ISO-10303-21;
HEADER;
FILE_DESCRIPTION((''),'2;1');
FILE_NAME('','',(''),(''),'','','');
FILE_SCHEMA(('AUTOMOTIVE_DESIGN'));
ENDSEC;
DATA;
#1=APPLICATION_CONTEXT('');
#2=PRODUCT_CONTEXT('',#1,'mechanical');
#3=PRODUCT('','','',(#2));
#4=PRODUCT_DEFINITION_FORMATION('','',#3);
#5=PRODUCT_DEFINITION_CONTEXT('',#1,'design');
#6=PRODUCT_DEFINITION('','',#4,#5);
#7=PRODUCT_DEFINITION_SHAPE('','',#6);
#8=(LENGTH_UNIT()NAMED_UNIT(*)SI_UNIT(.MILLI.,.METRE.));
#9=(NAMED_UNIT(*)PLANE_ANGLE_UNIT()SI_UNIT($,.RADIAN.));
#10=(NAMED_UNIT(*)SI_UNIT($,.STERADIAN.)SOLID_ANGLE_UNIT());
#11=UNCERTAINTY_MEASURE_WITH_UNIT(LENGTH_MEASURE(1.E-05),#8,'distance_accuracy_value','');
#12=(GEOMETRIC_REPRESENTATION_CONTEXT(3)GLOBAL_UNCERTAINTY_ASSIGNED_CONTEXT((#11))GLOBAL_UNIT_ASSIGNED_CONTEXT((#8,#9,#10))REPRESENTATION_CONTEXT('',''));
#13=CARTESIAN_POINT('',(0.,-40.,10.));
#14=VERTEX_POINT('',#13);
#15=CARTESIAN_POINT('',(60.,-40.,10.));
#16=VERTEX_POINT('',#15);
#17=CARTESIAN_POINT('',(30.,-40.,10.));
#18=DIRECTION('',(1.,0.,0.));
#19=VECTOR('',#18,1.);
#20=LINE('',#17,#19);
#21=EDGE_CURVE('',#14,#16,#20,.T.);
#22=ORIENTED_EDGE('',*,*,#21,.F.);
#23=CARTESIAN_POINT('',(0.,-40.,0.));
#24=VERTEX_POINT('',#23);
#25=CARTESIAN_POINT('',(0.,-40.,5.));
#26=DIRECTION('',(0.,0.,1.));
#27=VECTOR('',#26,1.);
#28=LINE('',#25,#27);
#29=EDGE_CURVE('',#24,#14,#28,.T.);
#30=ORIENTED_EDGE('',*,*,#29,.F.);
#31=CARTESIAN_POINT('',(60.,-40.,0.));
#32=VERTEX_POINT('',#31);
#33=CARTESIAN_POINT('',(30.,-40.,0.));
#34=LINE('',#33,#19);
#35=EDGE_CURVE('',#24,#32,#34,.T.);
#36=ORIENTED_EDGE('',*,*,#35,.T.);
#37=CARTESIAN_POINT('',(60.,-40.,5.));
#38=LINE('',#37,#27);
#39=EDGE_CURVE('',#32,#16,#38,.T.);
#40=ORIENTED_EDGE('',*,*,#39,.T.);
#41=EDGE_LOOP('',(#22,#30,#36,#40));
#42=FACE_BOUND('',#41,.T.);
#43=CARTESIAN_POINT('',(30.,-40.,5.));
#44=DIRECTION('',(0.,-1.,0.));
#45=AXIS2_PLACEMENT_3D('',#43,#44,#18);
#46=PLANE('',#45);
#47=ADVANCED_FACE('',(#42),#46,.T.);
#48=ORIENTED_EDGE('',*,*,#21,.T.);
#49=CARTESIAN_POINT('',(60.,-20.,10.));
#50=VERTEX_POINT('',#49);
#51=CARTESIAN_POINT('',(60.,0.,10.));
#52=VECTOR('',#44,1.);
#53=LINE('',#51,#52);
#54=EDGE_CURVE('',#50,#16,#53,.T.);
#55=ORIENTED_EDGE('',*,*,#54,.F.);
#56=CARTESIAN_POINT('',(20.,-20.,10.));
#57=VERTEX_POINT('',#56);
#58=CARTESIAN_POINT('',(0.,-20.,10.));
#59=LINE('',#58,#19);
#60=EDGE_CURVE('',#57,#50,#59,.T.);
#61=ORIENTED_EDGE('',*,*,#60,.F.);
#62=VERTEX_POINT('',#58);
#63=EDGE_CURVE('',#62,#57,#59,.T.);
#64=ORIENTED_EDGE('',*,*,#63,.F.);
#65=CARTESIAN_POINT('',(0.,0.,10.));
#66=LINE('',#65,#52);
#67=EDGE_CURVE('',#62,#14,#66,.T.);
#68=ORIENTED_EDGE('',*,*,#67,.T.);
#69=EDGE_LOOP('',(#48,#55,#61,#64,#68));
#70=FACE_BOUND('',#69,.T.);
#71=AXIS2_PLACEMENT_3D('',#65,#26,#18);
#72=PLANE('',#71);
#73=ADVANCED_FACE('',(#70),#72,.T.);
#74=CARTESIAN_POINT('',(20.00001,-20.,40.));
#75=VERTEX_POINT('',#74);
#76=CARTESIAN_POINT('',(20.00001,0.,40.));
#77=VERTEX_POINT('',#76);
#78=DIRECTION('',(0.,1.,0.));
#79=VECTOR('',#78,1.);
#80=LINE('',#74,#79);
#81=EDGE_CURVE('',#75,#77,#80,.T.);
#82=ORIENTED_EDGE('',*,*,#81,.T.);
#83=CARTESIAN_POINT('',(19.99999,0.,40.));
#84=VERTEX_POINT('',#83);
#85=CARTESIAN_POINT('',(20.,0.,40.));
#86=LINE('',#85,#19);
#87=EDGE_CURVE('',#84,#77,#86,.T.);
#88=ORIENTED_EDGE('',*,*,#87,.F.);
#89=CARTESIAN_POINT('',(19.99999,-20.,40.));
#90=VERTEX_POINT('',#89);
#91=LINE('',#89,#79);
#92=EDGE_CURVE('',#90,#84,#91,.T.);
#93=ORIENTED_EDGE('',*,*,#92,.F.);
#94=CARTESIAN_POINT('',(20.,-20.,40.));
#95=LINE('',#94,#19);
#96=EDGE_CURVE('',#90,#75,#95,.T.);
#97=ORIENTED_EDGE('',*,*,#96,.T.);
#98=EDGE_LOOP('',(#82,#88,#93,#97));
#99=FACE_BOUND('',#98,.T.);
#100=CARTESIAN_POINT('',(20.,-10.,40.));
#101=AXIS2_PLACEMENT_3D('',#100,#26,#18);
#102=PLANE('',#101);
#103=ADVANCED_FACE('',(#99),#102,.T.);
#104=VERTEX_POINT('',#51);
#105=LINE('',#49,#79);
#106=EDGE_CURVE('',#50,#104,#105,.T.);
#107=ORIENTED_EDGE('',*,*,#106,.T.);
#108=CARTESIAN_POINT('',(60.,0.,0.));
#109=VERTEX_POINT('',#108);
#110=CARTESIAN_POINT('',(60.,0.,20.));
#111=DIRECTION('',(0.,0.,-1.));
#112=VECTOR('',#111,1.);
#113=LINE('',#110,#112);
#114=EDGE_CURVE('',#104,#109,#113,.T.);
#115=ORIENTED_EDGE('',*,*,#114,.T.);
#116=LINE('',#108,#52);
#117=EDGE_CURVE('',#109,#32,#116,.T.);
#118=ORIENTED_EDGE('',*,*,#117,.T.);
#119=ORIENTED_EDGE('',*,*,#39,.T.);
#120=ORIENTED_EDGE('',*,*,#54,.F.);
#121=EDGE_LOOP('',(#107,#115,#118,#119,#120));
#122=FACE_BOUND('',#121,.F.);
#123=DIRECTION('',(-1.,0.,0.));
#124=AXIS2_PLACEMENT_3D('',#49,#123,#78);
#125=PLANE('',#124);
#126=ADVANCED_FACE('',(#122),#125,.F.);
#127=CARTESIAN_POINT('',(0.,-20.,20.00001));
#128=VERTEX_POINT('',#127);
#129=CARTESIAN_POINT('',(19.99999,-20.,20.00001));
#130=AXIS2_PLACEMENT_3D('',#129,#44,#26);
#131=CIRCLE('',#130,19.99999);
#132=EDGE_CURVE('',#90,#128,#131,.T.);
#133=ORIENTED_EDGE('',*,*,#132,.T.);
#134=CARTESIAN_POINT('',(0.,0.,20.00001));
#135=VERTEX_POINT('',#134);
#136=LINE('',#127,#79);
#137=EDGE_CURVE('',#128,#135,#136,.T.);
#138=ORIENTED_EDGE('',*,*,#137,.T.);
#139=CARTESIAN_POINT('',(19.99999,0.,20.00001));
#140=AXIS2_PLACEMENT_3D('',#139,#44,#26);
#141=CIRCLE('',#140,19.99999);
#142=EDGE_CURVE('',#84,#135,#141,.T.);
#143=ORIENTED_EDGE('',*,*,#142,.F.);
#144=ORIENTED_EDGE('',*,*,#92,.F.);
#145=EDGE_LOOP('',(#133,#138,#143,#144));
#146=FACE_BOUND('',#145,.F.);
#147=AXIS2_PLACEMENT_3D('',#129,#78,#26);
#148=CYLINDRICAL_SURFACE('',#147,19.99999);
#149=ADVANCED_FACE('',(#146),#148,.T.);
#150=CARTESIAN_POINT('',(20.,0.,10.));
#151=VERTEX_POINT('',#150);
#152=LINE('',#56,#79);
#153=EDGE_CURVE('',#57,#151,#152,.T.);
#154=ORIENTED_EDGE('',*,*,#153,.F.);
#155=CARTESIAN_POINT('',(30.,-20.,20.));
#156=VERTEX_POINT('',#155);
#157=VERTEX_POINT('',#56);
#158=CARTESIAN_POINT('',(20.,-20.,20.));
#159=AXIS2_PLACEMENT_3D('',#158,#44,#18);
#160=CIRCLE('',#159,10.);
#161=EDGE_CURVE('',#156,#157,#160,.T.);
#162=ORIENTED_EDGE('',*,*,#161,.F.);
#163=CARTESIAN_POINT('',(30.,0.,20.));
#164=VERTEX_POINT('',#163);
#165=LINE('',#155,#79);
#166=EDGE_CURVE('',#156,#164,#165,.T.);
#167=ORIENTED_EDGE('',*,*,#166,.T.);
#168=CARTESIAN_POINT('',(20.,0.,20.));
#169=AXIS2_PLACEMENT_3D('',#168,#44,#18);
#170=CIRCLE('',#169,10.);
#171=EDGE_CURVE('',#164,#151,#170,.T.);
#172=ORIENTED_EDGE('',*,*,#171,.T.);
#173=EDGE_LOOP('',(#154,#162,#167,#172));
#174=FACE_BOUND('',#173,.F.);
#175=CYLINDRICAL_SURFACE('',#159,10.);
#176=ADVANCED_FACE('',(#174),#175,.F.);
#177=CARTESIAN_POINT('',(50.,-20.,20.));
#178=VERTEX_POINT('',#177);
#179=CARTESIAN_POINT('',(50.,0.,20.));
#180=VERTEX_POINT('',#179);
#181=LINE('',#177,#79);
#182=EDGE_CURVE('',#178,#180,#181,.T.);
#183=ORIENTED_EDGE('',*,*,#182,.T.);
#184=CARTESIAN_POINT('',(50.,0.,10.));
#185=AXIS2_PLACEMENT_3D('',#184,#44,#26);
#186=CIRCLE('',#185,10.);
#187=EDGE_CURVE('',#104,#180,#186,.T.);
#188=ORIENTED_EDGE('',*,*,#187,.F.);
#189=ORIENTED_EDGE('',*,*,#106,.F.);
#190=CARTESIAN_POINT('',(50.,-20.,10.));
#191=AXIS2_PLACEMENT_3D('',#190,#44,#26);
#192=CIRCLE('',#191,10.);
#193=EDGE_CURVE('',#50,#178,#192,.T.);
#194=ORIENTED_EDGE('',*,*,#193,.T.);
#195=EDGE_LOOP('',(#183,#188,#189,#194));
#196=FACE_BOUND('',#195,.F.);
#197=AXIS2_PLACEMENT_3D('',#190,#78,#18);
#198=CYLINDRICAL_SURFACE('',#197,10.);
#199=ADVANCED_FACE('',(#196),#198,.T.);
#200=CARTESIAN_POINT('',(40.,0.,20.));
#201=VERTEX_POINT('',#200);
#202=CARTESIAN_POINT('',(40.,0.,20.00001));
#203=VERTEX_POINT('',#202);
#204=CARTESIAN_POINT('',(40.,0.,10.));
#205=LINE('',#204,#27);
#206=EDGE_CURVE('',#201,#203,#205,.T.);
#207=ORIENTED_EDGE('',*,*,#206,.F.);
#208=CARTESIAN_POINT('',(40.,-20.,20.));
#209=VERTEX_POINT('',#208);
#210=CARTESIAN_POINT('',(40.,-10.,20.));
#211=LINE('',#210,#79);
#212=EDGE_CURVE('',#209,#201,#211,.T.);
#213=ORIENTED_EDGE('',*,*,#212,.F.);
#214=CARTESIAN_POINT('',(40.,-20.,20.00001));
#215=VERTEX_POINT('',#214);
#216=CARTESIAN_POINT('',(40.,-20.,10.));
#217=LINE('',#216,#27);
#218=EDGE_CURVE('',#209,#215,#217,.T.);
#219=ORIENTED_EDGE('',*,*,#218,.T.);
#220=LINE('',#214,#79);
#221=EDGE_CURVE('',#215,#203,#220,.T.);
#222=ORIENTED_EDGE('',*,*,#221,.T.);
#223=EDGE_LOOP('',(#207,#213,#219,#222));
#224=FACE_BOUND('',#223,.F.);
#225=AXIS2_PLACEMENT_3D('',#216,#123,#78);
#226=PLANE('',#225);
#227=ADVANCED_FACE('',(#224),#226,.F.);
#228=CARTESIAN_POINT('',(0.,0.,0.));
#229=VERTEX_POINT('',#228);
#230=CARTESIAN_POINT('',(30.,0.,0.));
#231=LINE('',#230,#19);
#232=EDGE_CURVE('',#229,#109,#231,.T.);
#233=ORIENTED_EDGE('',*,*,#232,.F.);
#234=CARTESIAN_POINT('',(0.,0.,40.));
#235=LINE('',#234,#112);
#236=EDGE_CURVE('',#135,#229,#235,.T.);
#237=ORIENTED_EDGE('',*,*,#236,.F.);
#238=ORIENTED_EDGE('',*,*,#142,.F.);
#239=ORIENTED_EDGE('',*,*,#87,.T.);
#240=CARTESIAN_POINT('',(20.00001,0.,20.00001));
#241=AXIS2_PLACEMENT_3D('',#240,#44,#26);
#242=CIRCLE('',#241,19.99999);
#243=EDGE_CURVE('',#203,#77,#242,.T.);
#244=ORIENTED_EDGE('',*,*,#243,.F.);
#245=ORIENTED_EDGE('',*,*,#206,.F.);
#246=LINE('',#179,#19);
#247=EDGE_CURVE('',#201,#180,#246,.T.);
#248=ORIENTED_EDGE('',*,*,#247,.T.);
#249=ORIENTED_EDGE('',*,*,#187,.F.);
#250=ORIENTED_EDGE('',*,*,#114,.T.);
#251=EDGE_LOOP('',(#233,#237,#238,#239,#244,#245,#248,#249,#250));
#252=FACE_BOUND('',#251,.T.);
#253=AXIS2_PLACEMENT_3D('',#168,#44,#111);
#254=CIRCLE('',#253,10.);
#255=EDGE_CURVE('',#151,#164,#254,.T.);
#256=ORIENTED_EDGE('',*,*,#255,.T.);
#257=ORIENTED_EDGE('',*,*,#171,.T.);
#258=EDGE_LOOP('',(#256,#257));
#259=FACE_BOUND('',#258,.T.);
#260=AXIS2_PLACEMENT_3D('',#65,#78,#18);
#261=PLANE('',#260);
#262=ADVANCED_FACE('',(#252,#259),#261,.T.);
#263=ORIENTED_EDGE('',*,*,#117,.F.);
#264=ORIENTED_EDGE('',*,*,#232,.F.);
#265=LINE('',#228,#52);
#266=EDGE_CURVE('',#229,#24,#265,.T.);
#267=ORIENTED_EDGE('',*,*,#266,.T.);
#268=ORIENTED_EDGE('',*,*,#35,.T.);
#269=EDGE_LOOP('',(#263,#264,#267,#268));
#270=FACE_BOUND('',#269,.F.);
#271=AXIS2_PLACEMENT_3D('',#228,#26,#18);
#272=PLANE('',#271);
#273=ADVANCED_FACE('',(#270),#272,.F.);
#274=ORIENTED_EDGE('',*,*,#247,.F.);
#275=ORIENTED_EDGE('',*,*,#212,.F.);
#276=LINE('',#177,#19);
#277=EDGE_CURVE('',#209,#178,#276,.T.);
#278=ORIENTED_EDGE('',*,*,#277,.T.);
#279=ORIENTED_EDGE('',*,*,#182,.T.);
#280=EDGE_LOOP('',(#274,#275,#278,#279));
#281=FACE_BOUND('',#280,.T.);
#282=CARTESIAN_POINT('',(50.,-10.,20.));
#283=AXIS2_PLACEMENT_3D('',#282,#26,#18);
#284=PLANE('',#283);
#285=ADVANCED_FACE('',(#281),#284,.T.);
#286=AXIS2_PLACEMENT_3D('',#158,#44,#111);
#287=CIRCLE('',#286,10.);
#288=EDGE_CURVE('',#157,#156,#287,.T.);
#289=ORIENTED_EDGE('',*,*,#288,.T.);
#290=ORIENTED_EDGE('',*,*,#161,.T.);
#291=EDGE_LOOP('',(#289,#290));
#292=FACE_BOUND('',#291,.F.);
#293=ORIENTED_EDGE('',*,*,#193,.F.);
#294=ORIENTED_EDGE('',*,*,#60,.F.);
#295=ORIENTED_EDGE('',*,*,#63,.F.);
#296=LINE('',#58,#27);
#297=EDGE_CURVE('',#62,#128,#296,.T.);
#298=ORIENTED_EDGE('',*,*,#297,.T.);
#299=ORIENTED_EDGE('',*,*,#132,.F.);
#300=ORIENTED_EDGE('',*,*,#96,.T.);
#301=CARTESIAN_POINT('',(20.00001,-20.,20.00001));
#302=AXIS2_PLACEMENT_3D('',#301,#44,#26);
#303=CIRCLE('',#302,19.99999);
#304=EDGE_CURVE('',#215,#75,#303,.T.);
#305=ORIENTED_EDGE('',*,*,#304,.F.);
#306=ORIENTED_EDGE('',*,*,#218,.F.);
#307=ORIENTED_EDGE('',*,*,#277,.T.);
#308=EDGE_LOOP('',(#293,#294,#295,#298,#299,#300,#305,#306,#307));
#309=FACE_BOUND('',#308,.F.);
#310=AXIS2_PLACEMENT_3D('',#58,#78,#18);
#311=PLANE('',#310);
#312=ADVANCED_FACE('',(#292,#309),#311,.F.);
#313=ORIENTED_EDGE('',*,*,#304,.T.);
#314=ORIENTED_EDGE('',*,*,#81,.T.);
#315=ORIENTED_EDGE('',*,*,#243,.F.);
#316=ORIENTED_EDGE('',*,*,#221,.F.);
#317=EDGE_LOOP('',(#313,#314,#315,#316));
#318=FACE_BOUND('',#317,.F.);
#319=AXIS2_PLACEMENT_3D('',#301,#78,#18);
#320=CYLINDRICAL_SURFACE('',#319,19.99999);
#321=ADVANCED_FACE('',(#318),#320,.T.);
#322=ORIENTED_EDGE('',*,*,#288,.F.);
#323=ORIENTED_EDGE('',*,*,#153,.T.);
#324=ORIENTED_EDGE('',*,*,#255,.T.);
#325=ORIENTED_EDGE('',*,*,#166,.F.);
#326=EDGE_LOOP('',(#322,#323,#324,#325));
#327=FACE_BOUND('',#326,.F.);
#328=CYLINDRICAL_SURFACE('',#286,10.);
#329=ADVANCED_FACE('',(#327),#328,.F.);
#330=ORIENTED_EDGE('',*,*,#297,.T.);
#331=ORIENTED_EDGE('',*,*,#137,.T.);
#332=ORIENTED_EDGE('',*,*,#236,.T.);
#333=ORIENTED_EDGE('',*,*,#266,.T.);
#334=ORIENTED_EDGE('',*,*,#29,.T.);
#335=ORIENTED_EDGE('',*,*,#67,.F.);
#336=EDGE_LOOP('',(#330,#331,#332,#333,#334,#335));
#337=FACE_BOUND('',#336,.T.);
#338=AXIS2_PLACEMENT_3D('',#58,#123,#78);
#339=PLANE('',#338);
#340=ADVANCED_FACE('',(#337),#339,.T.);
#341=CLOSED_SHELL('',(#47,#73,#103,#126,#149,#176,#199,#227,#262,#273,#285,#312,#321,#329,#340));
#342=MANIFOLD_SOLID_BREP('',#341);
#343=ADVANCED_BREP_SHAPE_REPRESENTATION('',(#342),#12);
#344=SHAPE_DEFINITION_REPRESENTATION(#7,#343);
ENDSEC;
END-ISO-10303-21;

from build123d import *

# Parameters (mm, degrees)
F0_W     = 60
F0_H     = 10
F1_DEPTH = 40
F2_W     = 20
F2_H     = 20
F3_DEPTH = 10
F4_W     = 40
F4_H     = 20
F5_DEPTH = 30
F6_R     = 10
F7_R     = 19.99999
F9_DEPTH = 25


# Not quite as in the source:
# - a fillet or chamfer is up to 0.001 mm smaller than in the source, because OpenCascade refuses the exact size


with BuildPart() as f1:
    # F0 (on Front) → F1 (new body)
    with BuildSketch(Plane.XZ):
        with Locations((30, 5)):
            Rectangle(F0_W, F0_H)
    extrude(amount=F1_DEPTH)

    # F2 (on face) → F3 (join)
    with BuildSketch(Plane.XY.offset(10)):
        with Locations((50, -10)):
            Rectangle(F2_W, F2_H)
    extrude(amount=F3_DEPTH)

    # F4 (on face) → F5 (join)
    with BuildSketch(Plane.XY.offset(10)):
        with Locations((20, -10)):
            Rectangle(F4_W, F4_H)
    extrude(amount=F5_DEPTH)

    # F6
    f6_edges = [f1.edges().sort_by_distance(p)[0] for p in [
        (60, -10, 20),
    ]]
    fillet(f6_edges, radius=F6_R)

    # F7 (radius 20 in the source; OpenCascade refuses exactly that, so slightly less here)
    f7_edges = [f1.edges().sort_by_distance(p)[0] for p in [
        (40, -10, 40),
        (0, -10, 40),
    ]]
    fillet(f7_edges, radius=F7_R)

    # F8 (on face) → F9 (cut)
    with BuildSketch(Plane.XZ.offset(20)):
        with BuildLine():
            ThreePointArc((20, 10), (27.0710678119, 12.9289321881), (30, 20))
            ThreePointArc((30, 20), (12.9289321881, 27.0710678119), (20, 10))
        make_face()
    extrude(amount=-F9_DEPTH, mode=Mode.SUBTRACT)


solid = f1.part
